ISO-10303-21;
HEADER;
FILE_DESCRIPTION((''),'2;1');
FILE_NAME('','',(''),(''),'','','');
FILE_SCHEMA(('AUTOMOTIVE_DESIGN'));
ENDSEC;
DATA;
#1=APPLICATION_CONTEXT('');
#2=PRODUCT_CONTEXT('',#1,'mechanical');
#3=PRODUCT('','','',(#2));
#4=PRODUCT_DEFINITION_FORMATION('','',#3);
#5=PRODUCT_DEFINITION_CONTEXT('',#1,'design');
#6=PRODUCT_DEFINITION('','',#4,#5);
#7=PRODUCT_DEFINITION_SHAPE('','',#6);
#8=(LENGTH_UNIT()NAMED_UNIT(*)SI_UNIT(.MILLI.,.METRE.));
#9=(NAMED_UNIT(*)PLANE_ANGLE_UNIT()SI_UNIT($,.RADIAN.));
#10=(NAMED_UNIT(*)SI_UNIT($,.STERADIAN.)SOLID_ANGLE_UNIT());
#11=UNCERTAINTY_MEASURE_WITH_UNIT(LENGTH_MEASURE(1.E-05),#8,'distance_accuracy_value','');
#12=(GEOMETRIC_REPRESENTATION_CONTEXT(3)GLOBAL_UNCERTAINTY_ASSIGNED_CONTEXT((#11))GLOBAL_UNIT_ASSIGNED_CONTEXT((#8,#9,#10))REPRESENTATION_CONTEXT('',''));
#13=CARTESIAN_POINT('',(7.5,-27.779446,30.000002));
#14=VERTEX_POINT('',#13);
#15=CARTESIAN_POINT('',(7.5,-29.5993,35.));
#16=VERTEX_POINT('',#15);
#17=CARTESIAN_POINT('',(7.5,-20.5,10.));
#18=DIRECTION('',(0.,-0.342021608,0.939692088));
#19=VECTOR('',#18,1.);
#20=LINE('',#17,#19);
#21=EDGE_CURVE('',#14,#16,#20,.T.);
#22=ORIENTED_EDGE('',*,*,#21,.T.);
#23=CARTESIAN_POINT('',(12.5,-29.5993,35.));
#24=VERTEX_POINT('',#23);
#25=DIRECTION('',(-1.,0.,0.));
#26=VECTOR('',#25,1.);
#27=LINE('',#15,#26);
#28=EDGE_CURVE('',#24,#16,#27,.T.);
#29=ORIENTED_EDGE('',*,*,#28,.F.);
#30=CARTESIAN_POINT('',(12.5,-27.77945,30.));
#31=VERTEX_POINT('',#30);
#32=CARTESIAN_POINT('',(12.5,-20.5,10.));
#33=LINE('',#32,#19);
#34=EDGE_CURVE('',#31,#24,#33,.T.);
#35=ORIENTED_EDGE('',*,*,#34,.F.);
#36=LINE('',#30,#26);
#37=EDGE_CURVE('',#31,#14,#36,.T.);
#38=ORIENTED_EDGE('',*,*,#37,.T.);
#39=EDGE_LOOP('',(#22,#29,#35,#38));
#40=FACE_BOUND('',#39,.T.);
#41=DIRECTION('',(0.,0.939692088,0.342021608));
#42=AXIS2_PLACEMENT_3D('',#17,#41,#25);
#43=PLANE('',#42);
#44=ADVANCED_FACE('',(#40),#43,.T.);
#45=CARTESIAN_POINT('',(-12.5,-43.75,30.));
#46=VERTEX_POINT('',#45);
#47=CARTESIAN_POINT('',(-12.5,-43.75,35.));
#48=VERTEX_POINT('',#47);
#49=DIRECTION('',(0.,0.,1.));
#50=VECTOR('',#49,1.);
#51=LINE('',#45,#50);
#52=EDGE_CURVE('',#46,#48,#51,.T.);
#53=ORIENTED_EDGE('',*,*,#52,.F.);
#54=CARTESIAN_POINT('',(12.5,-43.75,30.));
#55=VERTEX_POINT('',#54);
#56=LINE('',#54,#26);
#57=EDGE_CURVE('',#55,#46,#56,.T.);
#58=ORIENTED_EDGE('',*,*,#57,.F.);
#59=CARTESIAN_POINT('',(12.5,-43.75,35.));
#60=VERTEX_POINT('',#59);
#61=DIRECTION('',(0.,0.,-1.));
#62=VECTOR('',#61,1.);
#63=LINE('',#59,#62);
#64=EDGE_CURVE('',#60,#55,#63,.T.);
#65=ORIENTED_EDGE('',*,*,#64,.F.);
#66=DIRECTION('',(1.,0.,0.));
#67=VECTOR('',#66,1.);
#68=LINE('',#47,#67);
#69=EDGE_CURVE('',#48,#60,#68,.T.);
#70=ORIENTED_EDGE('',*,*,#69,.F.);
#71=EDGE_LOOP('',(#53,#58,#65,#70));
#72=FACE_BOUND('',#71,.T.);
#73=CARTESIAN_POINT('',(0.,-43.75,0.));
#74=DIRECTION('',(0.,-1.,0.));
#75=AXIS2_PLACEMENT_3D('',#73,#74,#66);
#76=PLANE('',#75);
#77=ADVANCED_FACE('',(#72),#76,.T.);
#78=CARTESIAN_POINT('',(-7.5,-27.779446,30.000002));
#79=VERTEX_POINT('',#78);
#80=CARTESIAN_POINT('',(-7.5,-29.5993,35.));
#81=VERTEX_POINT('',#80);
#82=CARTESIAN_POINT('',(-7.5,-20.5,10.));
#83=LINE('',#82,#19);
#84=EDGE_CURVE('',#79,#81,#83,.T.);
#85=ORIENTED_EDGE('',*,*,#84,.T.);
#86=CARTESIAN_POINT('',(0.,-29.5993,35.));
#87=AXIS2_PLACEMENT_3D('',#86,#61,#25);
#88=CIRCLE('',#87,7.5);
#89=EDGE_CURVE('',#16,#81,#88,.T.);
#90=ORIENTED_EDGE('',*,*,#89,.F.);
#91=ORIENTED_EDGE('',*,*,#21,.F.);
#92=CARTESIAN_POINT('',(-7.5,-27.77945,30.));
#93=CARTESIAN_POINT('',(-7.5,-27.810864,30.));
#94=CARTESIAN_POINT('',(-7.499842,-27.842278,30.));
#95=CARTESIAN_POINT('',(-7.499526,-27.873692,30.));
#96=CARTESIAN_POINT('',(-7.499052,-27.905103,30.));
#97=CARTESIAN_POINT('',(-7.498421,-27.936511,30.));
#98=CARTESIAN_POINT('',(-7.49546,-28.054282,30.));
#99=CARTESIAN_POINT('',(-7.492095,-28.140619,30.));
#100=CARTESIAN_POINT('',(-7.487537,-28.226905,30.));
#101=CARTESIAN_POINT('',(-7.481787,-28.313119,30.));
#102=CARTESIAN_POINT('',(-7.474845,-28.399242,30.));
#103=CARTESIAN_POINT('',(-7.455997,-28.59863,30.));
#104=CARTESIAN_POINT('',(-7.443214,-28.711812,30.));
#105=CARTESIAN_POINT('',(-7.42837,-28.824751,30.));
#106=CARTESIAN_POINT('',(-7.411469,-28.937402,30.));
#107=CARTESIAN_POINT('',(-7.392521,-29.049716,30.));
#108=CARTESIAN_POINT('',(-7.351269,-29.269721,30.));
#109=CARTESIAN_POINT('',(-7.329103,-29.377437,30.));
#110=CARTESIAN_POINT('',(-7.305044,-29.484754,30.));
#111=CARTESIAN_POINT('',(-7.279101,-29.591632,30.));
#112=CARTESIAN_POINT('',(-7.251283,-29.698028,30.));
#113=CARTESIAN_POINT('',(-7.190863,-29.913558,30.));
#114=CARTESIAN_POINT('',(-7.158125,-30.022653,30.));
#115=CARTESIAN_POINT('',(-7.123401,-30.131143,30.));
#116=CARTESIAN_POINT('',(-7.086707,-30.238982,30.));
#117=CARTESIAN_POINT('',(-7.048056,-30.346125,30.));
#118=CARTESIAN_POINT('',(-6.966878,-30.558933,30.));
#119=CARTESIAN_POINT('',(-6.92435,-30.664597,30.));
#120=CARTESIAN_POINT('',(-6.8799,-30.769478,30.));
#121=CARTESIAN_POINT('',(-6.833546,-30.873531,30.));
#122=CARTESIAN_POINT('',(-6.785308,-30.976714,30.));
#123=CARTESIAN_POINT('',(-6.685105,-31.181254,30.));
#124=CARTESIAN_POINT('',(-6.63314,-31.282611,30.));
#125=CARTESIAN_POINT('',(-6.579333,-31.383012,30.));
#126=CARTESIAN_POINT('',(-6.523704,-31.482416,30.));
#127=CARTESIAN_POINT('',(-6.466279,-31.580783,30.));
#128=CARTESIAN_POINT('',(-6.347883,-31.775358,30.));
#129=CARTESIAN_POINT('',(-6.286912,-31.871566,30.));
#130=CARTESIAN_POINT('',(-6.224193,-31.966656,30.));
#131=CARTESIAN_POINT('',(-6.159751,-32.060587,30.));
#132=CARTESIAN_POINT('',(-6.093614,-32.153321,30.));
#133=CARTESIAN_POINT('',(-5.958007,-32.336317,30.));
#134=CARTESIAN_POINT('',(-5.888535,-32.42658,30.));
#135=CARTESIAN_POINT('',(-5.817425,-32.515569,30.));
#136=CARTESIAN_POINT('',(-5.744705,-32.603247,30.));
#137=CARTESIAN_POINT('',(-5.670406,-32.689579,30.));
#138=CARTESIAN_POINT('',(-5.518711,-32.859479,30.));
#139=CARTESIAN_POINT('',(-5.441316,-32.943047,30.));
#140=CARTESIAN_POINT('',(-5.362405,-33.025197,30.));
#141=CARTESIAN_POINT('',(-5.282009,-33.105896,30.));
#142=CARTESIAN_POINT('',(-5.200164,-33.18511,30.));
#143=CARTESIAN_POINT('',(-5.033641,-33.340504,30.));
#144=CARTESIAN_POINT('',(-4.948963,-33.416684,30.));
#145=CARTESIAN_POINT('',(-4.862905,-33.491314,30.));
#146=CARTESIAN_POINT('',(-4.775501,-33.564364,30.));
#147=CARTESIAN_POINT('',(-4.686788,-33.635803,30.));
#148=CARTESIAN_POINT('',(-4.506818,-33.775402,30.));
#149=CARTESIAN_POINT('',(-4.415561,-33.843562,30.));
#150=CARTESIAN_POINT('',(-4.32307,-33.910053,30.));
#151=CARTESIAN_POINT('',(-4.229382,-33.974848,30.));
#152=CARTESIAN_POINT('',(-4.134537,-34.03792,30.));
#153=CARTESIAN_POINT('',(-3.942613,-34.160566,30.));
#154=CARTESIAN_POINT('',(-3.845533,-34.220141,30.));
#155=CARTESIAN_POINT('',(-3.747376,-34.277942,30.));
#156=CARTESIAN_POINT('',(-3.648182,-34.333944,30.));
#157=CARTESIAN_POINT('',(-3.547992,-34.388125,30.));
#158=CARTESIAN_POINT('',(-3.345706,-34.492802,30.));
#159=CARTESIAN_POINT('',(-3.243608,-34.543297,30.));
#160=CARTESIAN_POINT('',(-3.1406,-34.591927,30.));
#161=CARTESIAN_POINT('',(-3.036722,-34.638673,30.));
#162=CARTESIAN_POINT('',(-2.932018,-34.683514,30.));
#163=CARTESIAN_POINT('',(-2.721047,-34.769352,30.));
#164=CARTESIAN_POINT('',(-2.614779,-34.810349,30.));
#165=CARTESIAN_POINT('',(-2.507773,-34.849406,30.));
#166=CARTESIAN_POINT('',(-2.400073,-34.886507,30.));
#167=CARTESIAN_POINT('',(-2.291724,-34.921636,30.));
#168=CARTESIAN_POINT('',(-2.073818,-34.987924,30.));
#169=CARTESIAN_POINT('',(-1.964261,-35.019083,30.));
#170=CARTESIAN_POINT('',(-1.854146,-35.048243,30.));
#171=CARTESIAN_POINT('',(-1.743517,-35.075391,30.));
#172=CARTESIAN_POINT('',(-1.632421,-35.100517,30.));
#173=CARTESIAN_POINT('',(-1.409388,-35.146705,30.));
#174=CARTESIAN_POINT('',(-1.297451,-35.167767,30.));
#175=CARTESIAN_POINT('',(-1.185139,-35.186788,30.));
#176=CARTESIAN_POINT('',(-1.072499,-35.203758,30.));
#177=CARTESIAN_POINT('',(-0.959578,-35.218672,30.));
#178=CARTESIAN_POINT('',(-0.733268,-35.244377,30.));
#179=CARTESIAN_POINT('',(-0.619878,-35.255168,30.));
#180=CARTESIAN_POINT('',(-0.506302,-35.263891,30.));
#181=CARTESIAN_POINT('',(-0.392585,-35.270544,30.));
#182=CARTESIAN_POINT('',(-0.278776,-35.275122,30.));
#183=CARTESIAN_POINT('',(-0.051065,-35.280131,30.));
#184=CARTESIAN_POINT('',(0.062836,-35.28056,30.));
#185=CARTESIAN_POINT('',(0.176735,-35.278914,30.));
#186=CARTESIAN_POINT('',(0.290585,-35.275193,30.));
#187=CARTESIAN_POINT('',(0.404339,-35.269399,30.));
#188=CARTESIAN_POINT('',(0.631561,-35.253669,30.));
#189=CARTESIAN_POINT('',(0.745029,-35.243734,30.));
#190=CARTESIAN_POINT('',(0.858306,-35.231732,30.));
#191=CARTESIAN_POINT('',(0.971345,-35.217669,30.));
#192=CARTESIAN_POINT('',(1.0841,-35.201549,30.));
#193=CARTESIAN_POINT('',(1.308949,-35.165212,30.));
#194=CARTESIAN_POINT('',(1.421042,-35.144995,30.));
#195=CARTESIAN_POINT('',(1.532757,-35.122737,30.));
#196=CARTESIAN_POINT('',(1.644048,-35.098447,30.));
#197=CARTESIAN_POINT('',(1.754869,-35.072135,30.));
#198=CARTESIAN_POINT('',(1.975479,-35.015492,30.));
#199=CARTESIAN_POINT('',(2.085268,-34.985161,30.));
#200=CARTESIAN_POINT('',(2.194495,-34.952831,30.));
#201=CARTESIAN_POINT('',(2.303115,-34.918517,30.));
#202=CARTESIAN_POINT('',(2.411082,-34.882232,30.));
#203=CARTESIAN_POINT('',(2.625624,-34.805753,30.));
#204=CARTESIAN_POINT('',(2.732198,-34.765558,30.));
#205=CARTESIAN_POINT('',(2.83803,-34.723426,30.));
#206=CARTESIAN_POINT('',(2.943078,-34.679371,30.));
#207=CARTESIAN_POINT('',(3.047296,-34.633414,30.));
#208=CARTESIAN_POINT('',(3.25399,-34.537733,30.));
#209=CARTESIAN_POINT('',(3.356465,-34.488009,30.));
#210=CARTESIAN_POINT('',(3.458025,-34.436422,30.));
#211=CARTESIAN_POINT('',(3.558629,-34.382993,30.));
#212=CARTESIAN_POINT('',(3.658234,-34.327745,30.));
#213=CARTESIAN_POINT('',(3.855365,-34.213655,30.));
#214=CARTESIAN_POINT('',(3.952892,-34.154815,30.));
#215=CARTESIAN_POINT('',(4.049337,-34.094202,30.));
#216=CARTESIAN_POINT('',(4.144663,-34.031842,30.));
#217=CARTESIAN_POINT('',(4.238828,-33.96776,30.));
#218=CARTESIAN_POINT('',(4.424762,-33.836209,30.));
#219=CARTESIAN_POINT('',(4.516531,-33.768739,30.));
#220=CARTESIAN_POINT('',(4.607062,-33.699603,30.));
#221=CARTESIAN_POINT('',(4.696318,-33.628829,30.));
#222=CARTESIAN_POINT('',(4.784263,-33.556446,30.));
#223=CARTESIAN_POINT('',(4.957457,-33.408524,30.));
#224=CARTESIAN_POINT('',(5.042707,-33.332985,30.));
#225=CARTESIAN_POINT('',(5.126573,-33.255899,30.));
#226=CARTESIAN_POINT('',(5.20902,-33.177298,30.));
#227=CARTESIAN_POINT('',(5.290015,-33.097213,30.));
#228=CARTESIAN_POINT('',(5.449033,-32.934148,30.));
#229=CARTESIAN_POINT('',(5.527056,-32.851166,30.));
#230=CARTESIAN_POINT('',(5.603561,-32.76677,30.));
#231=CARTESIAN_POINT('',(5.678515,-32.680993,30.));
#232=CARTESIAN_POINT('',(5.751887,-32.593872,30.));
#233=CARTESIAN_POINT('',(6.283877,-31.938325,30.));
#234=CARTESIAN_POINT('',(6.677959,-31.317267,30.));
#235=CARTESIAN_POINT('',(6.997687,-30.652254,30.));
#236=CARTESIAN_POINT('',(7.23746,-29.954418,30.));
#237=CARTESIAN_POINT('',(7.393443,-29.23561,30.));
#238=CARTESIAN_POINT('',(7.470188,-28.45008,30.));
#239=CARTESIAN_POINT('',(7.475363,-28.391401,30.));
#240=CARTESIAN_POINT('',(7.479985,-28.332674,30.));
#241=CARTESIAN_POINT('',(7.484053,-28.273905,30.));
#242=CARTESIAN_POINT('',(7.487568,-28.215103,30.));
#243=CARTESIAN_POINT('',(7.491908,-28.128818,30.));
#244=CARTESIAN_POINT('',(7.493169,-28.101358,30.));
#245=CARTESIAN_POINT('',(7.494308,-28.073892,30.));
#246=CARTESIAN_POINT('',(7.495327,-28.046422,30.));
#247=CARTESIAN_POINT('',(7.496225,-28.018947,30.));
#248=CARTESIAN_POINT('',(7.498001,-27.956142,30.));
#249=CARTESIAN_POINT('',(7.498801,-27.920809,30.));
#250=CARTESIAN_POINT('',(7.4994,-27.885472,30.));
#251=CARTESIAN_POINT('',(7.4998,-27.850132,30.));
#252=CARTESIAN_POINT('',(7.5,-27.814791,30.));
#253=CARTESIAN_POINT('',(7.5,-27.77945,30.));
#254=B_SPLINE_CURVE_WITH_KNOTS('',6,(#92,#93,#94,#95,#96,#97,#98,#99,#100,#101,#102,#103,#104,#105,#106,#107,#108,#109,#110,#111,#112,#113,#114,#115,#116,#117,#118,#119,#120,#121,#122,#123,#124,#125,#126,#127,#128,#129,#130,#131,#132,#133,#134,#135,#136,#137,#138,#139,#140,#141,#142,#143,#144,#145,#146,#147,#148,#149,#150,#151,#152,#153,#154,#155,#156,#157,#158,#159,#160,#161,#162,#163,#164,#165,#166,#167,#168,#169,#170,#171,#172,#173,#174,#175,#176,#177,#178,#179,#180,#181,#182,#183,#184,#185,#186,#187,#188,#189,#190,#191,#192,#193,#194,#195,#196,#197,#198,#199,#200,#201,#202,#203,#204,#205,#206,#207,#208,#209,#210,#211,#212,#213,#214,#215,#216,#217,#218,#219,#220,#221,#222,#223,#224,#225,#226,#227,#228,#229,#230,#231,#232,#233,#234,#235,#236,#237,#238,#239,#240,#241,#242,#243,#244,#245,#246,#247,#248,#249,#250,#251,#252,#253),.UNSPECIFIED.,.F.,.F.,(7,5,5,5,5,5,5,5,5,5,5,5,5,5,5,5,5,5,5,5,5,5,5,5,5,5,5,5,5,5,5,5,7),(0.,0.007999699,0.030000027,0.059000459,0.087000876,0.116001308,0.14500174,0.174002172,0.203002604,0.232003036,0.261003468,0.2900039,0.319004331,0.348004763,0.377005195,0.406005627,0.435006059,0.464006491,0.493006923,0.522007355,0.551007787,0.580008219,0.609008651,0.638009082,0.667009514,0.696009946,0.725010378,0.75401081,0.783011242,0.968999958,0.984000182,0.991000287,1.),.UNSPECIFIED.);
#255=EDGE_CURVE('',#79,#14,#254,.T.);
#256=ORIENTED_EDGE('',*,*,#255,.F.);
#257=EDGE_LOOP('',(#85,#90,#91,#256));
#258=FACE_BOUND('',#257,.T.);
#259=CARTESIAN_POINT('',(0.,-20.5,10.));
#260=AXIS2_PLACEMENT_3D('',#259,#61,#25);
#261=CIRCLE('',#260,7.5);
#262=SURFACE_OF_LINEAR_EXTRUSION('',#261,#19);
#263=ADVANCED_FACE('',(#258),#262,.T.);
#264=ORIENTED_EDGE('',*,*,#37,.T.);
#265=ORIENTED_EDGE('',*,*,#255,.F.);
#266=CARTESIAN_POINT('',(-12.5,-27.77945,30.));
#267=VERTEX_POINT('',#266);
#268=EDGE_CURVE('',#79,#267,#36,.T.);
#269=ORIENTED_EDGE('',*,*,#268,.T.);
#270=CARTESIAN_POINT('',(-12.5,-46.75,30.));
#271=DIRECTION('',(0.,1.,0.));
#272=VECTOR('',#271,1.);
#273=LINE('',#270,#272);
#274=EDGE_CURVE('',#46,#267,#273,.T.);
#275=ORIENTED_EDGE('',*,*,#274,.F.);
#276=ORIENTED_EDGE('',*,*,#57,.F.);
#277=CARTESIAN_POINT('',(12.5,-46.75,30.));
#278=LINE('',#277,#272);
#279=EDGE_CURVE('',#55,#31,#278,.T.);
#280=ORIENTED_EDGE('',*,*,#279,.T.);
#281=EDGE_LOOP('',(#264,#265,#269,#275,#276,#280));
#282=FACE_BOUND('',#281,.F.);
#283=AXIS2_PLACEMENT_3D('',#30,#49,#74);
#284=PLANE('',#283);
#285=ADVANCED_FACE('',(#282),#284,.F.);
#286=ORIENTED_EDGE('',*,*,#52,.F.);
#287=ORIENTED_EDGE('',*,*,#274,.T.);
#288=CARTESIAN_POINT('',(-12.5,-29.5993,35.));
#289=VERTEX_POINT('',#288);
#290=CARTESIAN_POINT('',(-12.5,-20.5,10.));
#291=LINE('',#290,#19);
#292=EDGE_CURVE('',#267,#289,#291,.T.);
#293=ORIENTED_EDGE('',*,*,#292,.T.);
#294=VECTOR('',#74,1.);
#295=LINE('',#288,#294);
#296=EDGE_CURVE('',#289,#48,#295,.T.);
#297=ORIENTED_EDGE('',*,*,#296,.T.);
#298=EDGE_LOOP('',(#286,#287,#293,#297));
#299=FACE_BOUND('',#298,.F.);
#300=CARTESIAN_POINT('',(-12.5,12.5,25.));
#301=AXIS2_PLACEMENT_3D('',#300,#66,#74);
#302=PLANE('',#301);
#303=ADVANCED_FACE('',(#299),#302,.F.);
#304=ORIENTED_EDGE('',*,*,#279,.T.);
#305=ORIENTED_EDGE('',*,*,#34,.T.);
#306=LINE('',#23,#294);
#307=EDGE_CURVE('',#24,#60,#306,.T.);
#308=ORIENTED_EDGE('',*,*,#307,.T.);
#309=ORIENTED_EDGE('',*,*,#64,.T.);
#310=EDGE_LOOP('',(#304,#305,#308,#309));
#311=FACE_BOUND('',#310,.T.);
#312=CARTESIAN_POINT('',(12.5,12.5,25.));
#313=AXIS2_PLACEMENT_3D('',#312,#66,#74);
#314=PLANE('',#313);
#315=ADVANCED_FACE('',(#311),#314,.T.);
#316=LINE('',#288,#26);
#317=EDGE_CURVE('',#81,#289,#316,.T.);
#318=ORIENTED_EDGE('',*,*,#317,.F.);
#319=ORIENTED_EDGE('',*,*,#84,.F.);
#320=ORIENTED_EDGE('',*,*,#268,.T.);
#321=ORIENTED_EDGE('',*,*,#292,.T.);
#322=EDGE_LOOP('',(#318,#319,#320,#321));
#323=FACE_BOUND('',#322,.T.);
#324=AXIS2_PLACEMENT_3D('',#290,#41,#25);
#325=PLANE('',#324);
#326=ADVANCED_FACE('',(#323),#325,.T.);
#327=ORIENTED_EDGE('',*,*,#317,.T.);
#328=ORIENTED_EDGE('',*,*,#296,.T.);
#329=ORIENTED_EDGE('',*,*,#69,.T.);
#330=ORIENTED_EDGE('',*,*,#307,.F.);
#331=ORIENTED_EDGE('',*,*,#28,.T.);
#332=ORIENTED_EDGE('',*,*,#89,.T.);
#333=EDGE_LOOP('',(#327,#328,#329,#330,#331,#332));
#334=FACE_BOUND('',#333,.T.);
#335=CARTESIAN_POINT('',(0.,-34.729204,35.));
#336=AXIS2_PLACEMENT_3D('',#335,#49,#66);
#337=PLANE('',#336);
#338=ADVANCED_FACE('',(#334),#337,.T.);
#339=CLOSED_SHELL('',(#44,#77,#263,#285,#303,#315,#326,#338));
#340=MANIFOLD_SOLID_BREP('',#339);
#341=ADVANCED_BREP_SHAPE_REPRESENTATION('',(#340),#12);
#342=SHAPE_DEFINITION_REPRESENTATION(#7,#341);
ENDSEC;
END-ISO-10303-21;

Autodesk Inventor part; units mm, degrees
ref_plane "YZ Plane" through (0, 0, 0) normal (1, 0, 0) x (0, 1, 0)
sketch "Sketch1" plane through (0, 0, 0) normal (0, 0, 1) x (1, 0, 0)
  line L0 (-12.5, 12.5) -> (12.5, 12.5)
  line L1 (12.5, 12.5) -> (12.5, -37.5)
  line L2 (12.5, -37.5) -> (-12.5, -37.5)
  line L3 (-12.5, -37.5) -> (-12.5, 12.5)
  point P0 (0, 0)
  dimension "d0" = 25
  dimension "d1" = 50
  dimension "d2" = 12.5
  dimension "d3" = 12.5
extrude "Extrusion1" add sketch "Sketch1" along normal blind 10
sketch "Sketch3" plane through (0, 0, 10) normal (0, 0, 1) x (1, 0, 0)
  arc A0 (7.5, 0) -> (-7.5, 0) centre (0, 0) ccw
  line L0 (-7.5, 0) -> (-12.5, 0)
  line L1 (-12.5, 12.5) -> (-12.5, -37.5) projected
  line L2 (-12.5, 0) -> (-12.5, 12.5)
  line L3 (12.5, 12.5) -> (-12.5, 12.5) projected
  line L4 (12.5, 12.5) -> (12.5, 0)
  line L5 (12.5, -37.5) -> (12.5, 12.5) projected
  line L6 (7.5, 0) -> (12.5, 0)
  dimension "d11" = 15
extrude "Extrusion3" add sketch "Sketch3" along normal blind 15
sketch "Sketch4" plane through (0, 0, 25) normal (0, 0, 1) x (1, 0, 0)
  line L0 (-12.5, 12.5) -> (-12.5, 0) projected
  line L1 (-12.5, 12.5) -> (12.5, 12.5)
  line L2 (12.5, 12.5) -> (12.5, -17.5)
  line L3 (12.5, -17.5) -> (-12.5, -17.5)
  line L4 (-12.5, -17.5) -> (-12.5, 12.5)
  point P0 (0, 0)
  dimension "d14" = 25
  dimension "d21" = 30
extrude "Extrusion4" add sketch "Sketch4" along normal blind 10
sketch "Sketch5" plane through (0, 0, 0) normal (0, 0, -1) x (-1, 0, 0)
  circle A0 centre (0, 0) radius 7.5
  dimension "d18" = 15
extrude "Extrusion5" cut sketch "Sketch5" against normal blind 10
sketch "Sketch6" plane through (0, 0, 10) normal (0, 0, 1) x (1, 0, 0)
  line L0 (-12.5, -20.5) -> (-12.5, -37.5)
  line L1 (-12.5, -37.5) -> (12.5, -37.5) projected
  line L2 (-12.5, -37.5) -> (12.5, -37.5)
  line L3 (12.5, -37.5) -> (12.5, -20.5)
  line L4 (12.5, -37.5) -> (12.5, 0) projected
  arc A0 (-7.5, -20.5) -> (7.5, -20.5) centre (0, -20.5) ccw
  line L5 (-12.5, -20.5) -> (-7.5, -20.5)
  line L6 (7.5, -20.5) -> (12.5, -20.5)
  line L7 (-12.5, 0) -> (-12.5, -37.5) projected
  line L8 (-12.5, -29) -> (12.5, -29)
  point P0 (0, 0)
  dimension "d22" = 15
  dimension "d23" = 17
  dimension "d24" = 17
ref_plane "Work Plane1" through (0, -37.5, 0) normal (-1, 0, 0) x (0, 0, 1)
sketch "Sketch8" plane through (0, -37.5, 0) normal (-1, 0, 0) x (0, 0, 1)
  line L0 (10, 0) -> (10, 37.5) projected
  line L1 (10, 8.5) -> (35, -0.5993)
  line L2 (10, 8.5) -> (36.6044, 8.5) construction
  line L3 (0, 0) -> (10, 0) projected
  point P0 (0, 37.5)
  dimension "d26" = 20
  dimension "d27" = 8.5
  dimension "d32" = 25
sweep "Sweep1" add profiles "Sketch6" path "Sketch8" path curves L1
sketch "Sketch9" plane through (12.5, -37.5, 0) normal (1, 0, 0) x (0, 0, -1)
  point P0 (0, 37.5)
sketch "Sketch10" plane through (12.5, -37.5, 0) normal (1, 0, 0) x (0, 0, -1)
  line L0 (-25, 37.5) -> (-25, 45) projected
  line L1 (-25, 37.5) -> (0, 37.5)
  line L2 (0, 37.5) -> (0, -8.9712)
  line L3 (0, -8.9712) -> (-25, -8.9712)
  line L4 (-25, -8.9712) -> (-25, 37.5)
extrude "Extrusion6" cut sketch "Sketch10" against normal up to surface (25 mm away)
sketch "Sketch11" plane through (0, 0, 35) normal (0, 0, 1) x (1, 0, 0)
  line L0 (12.5, 12.5) -> (-12.5, 12.5) projected
  line L1 (12.5, -17.5) -> (12.5, 0) projected
  line L2 (-12.5, 12.5) -> (12.5, 12.5)
  line L3 (12.5, 12.5) -> (12.5, -17.5)
  line L4 (12.5, -17.5) -> (-12.5, -17.5)
  line L5 (-12.5, -17.5) -> (-12.5, 12.5)
  point P0 (0, 0)
extrude "Extrusion7" cut sketch "Sketch11" against normal up to surface (35 mm away)
sketch "Sketch12" plane through (12.5, -46.5993, 35) normal (1, 0, 0) x (0, 0, -1)
  line L0 (10, 20.6397) -> (0, 17) projected
  line L1 (10, 20.6397) -> (5, 20.6397)
  line L2 (5, 20.6397) -> (5, 0)
  line L3 (5, 0) -> (10, 0)
  line L4 (10, 0) -> (10, 20.6397)
  point P0 (35, 46.5993)
  point P1 (5, 18.8199)
  dimension "d37" = 5
extrude "Extrusion8" cut sketch "Sketch12" against normal up to surface (25 mm away) contours L4 L3 L2 L0
ref_plane "Work Plane2" through (0, -43.75, 0) normal (0, 1, 0) x (-1, 0, 0)
sketch "Sketch15" plane through (0, -43.75, 0) normal (0, 1, 0) x (-1, 0, 0)
  line L0 (12.5, 35) -> (-12.5, 35) projected
  line L1 (-12.5, 30) -> (-7.5, 30) projected
  line L2 (12.5, 35) -> (-12.5, 35)
  line L3 (-12.5, 35) -> (-12.5, 30)
  line L4 (-12.5, 30) -> (12.5, 30)
  line L5 (12.5, 30) -> (12.5, 35)
  point P0 (0, 0)
extrude "Extrusion10" add sketch "Sketch15" against normal blind 3
sketch "Sketch16" plane through (0, -46.75, 0) normal (0, -1, 0) x (1, 0, 0)
  line L0 (-12.5, 30) -> (-12.5, 35) projected
  line L1 (12.5, 30) -> (7.5, 30) projected
  line L2 (-12.5, 35) -> (12.5, 35)
  line L3 (12.5, 35) -> (12.5, 30)
  line L4 (12.5, 30) -> (-12.5, 30)
  line L5 (-12.5, 30) -> (-12.5, 35)
  point P0 (0, 0)
extrude "Extrusion11" cut sketch "Sketch16" against normal blind 3
equation "\"d2\" = 0.5 * d0"
equation "\"d24\" = d23"
properties part number "Follower Ramp"
